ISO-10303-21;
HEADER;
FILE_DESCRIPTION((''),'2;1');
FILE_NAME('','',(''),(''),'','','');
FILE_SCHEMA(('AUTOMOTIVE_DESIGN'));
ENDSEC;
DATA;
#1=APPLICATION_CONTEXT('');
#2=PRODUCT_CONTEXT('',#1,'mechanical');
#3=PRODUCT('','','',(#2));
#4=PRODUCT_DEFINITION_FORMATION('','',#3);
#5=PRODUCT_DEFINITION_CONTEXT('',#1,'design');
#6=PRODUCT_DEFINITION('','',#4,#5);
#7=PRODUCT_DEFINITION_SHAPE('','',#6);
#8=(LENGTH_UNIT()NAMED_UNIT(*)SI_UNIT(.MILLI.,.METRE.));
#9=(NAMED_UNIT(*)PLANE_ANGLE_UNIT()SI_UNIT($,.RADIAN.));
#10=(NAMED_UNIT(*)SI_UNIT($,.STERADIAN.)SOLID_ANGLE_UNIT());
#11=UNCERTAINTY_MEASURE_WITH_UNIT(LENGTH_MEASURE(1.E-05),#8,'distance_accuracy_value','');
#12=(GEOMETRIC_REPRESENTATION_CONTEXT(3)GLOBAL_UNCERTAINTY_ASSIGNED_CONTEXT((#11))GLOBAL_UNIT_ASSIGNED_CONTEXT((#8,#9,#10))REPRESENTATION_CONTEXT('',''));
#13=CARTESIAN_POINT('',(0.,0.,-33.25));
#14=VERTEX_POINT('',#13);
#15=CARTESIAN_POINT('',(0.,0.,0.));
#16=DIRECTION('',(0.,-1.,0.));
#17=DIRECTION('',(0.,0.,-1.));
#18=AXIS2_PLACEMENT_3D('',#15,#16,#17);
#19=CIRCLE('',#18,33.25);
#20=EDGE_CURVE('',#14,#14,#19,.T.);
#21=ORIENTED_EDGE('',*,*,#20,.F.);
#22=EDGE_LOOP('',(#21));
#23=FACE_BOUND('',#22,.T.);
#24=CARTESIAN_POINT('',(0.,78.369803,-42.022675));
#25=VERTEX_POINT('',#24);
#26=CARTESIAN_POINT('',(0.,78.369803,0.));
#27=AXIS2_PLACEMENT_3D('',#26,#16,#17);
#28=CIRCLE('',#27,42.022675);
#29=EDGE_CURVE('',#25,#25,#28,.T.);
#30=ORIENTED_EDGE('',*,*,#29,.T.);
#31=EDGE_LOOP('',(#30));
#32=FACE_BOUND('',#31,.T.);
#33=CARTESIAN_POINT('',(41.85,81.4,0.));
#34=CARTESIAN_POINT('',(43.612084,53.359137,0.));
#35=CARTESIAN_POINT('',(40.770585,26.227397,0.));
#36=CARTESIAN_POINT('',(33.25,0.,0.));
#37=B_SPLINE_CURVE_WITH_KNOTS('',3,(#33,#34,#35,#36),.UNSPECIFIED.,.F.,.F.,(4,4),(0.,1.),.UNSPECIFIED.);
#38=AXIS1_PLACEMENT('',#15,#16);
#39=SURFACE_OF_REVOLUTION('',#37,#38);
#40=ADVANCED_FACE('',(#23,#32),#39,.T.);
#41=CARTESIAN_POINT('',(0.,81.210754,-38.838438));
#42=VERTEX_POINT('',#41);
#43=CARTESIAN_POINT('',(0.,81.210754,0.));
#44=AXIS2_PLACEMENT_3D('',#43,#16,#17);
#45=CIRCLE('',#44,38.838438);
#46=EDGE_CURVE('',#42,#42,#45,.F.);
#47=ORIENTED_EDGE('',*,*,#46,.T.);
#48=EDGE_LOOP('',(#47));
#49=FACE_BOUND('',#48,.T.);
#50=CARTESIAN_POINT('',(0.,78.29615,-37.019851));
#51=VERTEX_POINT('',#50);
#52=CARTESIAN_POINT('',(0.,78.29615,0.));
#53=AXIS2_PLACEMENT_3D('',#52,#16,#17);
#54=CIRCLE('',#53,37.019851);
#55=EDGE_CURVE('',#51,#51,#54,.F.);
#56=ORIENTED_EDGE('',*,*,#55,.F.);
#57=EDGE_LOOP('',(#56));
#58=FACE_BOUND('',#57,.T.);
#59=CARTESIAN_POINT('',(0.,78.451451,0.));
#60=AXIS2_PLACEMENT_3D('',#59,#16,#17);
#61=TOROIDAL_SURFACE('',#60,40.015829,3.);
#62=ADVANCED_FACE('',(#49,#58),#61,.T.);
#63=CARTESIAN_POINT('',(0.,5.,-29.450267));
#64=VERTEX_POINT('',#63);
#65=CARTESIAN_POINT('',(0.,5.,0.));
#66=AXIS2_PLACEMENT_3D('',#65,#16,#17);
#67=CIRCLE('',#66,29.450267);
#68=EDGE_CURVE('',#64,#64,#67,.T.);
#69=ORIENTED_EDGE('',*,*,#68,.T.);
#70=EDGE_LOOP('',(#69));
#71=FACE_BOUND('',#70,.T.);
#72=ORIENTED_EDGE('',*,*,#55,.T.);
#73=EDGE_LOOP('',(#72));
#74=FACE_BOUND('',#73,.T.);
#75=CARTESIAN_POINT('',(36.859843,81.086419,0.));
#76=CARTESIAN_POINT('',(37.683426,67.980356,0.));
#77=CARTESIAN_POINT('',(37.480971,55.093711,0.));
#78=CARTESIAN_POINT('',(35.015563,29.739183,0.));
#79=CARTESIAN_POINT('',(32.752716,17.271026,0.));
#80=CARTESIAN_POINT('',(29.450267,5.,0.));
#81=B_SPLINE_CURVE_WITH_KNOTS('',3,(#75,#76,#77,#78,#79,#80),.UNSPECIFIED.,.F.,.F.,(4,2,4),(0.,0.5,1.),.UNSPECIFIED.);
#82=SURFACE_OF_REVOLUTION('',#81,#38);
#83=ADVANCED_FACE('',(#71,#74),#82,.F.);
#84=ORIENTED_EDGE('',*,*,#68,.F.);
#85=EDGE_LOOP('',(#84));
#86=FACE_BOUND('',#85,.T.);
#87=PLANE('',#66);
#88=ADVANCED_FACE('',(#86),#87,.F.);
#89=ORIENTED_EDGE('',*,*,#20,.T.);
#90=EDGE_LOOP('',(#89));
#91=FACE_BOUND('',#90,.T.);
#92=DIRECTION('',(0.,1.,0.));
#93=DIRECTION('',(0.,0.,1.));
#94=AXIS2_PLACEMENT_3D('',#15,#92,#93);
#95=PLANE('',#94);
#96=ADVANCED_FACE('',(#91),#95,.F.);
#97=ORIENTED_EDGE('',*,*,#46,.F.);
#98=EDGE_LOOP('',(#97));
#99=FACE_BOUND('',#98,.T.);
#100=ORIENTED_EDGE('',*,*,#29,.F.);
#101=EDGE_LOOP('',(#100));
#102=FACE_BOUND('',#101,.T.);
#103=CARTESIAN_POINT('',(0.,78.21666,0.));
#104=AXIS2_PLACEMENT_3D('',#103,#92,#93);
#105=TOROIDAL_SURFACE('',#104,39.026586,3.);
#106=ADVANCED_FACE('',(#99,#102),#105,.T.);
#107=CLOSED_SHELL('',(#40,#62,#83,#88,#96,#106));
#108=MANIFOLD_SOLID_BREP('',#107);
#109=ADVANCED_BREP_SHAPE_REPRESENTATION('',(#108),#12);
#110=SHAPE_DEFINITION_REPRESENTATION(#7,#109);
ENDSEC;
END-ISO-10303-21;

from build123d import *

# Parameters (mm, degrees)
REVOLVE_THIN1_OUTLINE_W   = 29.450267211
REVOLVE_THIN1_OUTLINE_H   = 5
REVOLVE_THIN1_OUTLINE_W_2 = 3.799732789
FILLET1_R                 = 3
FILLET2_R                 = 3


with BuildPart() as part:
    # Revolve-Thin1: read off the stored shape, not the designer's step
    # Revolve-Thin1 outline → Revolve-Thin1 (revolve)
    with BuildSketch(Plane.XY):
        with Locations((14.725133606, 2.5)):
            Rectangle(REVOLVE_THIN1_OUTLINE_W, REVOLVE_THIN1_OUTLINE_H)
        with BuildLine():
            add(Edge.make_bspline(
                [(33.25, 21.540462794), (32.189733803, 15.987039243), (30.923436105, 10.473906002), (29.450267211, 5)],
                knots=[0.776958098, 0.776958098, 0.776958098, 0.776958098, 1, 1, 1, 1], degree=3))
            Line((29.450267211, 5), (33.25, 5))
            Line((33.25, 5), (33.25, 21.540462794))
        make_face()
        with Locations((31.350133606, 2.5)):
            Rectangle(REVOLVE_THIN1_OUTLINE_W_2, REVOLVE_THIN1_OUTLINE_H)
        with BuildLine():
            add(Edge.make_bspline(
                [(36.859842979, 49.97897652), (36.696432633, 47.449856459), (36.492584883, 44.929039429), (35.565452083, 35.394305381), (34.566565666, 28.436322344), (33.25, 21.540462794)],
                knots=[0.400901641, 0.400901641, 0.400901641, 0.400901641, 0.5, 0.5, 0.776958098, 0.776958098, 0.776958098, 0.776958098], degree=3))
            Line((33.25, 21.540462794), (33.25, 5))
            Line((33.25, 5), (34.624179934, 5))
            add(Edge.make_bspline(
                [(36.859842979, 14.264797136), (36.178275367, 11.164191598), (35.433094422, 8.075928422), (34.624179934, 5)],
                knots=[0.81982334, 0.81982334, 0.81982334, 0.81982334, 0.936591868, 0.936591868, 0.936591868, 0.936591868], degree=3))
            Line((36.859842979, 14.264797136), (36.859842979, 49.97897652))
        make_face()
        with BuildLine():
            Line((34.624179934, 5), (33.25, 5))
            Line((33.25, 5), (33.25, 0))
            add(Edge.make_bspline(
                [(34.624179934, 5), (34.184919817, 3.329696526), (33.726866255, 1.663030265), (33.25, 0)],
                knots=[0.936591868, 0.936591868, 0.936591868, 0.936591868, 1, 1, 1, 1], degree=3))
        make_face()
        with BuildLine():
            add(Edge.make_bspline(
                [(36.859842979, 81.086419218), (37.520194687, 70.57793496), (37.520918259, 60.210512009), (36.859842979, 49.97897652)],
                knots=[0, 0, 0, 0, 0.400901641, 0.400901641, 0.400901641, 0.400901641], degree=3))
            Line((36.859842979, 49.97897652), (36.859842979, 14.264797136))
            add(Edge.make_bspline(
                [(41.85, 49.665684489), (41.076850789, 37.691576327), (39.415577842, 25.891414258), (36.859842979, 14.264797136)],
                knots=[0.381965979, 0.381965979, 0.381965979, 0.381965979, 0.81982334, 0.81982334, 0.81982334, 0.81982334], degree=3))
            Line((41.85, 49.665684489), (41.85, 81.086419218))
            Line((41.85, 81.086419218), (36.859842979, 81.086419218))
        make_face()
        Polygon((41.85, 81.4), (36.859842979, 81.086419218), (41.85, 81.086419218), align=None)
        with BuildLine():
            add(Edge.make_bspline(
                [(41.85, 81.4), (41.856569252, 81.295460437), (41.863074519, 81.19093351), (41.869515798, 81.086419218)],
                knots=[0, 0, 0, 0, 0.003728115, 0.003728115, 0.003728115, 0.003728115], degree=3))
            Line((41.85, 81.4), (41.85, 81.086419218))
            Line((41.85, 81.086419218), (41.869515798, 81.086419218))
        make_face()
        with BuildLine():
            Line((41.869515798, 81.086419218), (41.85, 81.086419218))
            Line((41.85, 81.086419218), (41.85, 49.665684489))
            add(Edge.make_bspline(
                [(42.355318185, 65.4252057), (42.355318195, 60.138951042), (42.187053846, 54.885788383), (41.85, 49.665684489)],
                knots=[0.191082375, 0.191082375, 0.191082375, 0.191082375, 0.381965979, 0.381965979, 0.381965979, 0.381965979], degree=3))
            add(Edge.make_bspline(
                [(41.869515798, 81.086419218), (42.193218531, 75.834114157), (42.355318175, 70.613720127), (42.355318185, 65.4252057)],
                knots=[0.003728115, 0.003728115, 0.003728115, 0.003728115, 0.191082375, 0.191082375, 0.191082375, 0.191082375], degree=3))
        make_face()
    revolve(axis=Axis((0, 0, 0), (0, 1, 0)))

    # Fillet1
    fillet1_edges = [part.edges().sort_by_distance(p)[0] for p in [
        (-41.85, 81.4, 0),
    ]]
    fillet(fillet1_edges, radius=FILLET1_R)

    # Fillet2
    # the kernel refuses this fillet: 3 mm, written as the material it takes off along each edge
    with BuildSketch(Plane(origin=(0, 81.086419218, 0), x_dir=(1, 0, 0), z_dir=(0, 0, 1))) as fillet2_piece_1:
        with BuildLine():
            CenterArc((40.015828759, -2.634967847), FILLET2_R, 113.107886202, 69.859477004)
            Line((37.019851206, -2.790269174), (36.959931655, -2.7933752))
            ThreePointArc((36.959931655, -2.7933752), (36.883770687, -1.398350534), (36.799961095, -0.003762969))
            Line((36.799961095, -0.003762969), (36.85608001, 0.059881884))
            ThreePointArc((36.85608001, 0.059881884), (37.845377324, 0.122049192), (38.814889784, 0.179520664))
            Line((38.814889784, 0.179520664), (38.838437607, 0.124334615))
        make_face()
    revolve(axis=Axis((0, 81.086419218, 0), (0, 1, 0)), mode=Mode.SUBTRACT)


solid = part.part
